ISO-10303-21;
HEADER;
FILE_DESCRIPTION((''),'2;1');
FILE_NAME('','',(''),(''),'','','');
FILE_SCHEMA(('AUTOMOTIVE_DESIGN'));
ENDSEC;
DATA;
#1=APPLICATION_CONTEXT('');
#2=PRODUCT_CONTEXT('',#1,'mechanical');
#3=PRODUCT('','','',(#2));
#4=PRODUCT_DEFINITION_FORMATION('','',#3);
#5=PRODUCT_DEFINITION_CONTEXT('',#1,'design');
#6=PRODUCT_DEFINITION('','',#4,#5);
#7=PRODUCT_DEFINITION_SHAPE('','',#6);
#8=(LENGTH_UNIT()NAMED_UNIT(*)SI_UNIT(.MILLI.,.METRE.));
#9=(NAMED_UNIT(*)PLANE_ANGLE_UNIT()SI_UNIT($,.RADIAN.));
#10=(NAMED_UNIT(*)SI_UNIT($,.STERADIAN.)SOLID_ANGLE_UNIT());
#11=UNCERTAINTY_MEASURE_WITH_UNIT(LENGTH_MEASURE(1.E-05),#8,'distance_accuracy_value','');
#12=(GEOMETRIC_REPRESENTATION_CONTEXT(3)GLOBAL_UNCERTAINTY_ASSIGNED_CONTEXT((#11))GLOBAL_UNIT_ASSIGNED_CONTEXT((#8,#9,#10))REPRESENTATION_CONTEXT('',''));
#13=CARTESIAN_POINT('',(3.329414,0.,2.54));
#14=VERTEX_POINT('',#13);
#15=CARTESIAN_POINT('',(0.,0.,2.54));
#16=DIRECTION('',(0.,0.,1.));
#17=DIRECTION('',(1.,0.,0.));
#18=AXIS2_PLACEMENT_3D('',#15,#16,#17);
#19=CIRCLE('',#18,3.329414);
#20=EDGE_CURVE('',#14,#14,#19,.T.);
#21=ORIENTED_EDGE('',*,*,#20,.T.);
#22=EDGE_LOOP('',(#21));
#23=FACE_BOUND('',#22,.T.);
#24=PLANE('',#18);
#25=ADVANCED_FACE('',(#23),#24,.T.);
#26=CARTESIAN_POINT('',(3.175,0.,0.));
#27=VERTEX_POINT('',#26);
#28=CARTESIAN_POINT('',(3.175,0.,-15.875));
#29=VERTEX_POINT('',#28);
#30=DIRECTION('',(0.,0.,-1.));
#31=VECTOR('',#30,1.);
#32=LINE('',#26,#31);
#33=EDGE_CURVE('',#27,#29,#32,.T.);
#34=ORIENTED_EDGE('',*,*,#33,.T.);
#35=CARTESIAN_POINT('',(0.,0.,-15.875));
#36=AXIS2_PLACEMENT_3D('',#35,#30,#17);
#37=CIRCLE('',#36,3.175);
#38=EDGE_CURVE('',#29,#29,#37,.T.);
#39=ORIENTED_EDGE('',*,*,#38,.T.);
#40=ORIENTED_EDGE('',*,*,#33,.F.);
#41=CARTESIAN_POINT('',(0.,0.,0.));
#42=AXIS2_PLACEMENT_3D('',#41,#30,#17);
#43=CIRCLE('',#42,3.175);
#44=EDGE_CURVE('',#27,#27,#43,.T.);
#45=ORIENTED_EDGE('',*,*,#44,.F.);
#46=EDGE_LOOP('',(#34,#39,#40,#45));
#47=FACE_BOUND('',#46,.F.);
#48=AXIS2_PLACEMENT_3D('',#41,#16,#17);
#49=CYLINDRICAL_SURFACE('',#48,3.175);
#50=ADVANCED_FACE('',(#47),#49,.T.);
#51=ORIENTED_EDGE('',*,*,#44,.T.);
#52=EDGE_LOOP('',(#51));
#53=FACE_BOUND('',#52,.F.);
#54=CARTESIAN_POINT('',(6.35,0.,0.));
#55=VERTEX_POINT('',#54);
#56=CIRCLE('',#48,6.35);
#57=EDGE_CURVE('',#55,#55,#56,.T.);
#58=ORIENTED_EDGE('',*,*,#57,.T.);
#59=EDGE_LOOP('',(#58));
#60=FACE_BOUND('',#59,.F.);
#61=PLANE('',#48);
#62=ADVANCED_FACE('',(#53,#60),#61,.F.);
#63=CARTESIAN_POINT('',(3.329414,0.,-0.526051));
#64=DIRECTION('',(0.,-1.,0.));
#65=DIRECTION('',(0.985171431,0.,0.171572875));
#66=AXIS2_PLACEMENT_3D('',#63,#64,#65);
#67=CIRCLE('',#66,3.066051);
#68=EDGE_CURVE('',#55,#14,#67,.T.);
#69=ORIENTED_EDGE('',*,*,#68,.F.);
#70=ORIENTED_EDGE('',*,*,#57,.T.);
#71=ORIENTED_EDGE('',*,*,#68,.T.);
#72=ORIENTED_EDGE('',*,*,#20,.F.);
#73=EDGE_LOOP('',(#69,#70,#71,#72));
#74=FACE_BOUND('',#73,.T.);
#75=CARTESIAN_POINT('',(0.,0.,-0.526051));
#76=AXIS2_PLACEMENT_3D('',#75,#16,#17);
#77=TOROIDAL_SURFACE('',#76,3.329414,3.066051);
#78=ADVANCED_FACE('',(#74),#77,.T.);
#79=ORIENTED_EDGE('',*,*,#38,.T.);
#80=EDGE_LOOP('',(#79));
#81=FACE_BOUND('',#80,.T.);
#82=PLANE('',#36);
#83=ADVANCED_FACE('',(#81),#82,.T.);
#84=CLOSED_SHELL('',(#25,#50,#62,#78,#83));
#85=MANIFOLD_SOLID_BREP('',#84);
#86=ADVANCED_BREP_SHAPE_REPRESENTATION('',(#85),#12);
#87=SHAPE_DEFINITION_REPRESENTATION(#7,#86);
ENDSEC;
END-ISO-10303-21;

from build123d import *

# Parameters (mm, degrees)
F0_R     = 6.35
F1_DEPTH = 2.54
F3_R     = 3.175
F4_DEPTH = 15.875


# Not quite as in the source:
# - a fillet or chamfer that OpenCascade refuses, or shapes differently, is made with other operations: its cross-section is extruded or revolved along the edge and cut away or added


with BuildPart() as f1:
    # F0 (on Top) → F1 (new body)
    with BuildSketch(Plane.XY):
        Circle(F0_R)
    extrude(amount=F1_DEPTH)

    # F2: fillet of radius 3.0660512242 on 1 edges, made by hand

    # F2_s1 → F2_t2 (revolve, cut)
    with BuildSketch(Plane.XZ):
        with BuildLine():
            ThreePointArc((6.35, 0), (5.3027068749, 1.8206027884), (3.3294139279, 2.54))
            Line((3.3294139279, 2.54), (6.35, 2.54))
            Line((6.35, 2.54), (6.35, 0))
        make_face()
    revolve(axis=Axis((0, 0, 2.54), (0, 0, 1)), mode=Mode.SUBTRACT)

    # F3 (on face) → F4 (join)
    with BuildSketch(Plane(origin=(0, 0, 0), x_dir=(1, 0, 0), z_dir=(0, 0, -1))):
        Circle(F3_R)
    extrude(amount=F4_DEPTH)


solid = f1.part
